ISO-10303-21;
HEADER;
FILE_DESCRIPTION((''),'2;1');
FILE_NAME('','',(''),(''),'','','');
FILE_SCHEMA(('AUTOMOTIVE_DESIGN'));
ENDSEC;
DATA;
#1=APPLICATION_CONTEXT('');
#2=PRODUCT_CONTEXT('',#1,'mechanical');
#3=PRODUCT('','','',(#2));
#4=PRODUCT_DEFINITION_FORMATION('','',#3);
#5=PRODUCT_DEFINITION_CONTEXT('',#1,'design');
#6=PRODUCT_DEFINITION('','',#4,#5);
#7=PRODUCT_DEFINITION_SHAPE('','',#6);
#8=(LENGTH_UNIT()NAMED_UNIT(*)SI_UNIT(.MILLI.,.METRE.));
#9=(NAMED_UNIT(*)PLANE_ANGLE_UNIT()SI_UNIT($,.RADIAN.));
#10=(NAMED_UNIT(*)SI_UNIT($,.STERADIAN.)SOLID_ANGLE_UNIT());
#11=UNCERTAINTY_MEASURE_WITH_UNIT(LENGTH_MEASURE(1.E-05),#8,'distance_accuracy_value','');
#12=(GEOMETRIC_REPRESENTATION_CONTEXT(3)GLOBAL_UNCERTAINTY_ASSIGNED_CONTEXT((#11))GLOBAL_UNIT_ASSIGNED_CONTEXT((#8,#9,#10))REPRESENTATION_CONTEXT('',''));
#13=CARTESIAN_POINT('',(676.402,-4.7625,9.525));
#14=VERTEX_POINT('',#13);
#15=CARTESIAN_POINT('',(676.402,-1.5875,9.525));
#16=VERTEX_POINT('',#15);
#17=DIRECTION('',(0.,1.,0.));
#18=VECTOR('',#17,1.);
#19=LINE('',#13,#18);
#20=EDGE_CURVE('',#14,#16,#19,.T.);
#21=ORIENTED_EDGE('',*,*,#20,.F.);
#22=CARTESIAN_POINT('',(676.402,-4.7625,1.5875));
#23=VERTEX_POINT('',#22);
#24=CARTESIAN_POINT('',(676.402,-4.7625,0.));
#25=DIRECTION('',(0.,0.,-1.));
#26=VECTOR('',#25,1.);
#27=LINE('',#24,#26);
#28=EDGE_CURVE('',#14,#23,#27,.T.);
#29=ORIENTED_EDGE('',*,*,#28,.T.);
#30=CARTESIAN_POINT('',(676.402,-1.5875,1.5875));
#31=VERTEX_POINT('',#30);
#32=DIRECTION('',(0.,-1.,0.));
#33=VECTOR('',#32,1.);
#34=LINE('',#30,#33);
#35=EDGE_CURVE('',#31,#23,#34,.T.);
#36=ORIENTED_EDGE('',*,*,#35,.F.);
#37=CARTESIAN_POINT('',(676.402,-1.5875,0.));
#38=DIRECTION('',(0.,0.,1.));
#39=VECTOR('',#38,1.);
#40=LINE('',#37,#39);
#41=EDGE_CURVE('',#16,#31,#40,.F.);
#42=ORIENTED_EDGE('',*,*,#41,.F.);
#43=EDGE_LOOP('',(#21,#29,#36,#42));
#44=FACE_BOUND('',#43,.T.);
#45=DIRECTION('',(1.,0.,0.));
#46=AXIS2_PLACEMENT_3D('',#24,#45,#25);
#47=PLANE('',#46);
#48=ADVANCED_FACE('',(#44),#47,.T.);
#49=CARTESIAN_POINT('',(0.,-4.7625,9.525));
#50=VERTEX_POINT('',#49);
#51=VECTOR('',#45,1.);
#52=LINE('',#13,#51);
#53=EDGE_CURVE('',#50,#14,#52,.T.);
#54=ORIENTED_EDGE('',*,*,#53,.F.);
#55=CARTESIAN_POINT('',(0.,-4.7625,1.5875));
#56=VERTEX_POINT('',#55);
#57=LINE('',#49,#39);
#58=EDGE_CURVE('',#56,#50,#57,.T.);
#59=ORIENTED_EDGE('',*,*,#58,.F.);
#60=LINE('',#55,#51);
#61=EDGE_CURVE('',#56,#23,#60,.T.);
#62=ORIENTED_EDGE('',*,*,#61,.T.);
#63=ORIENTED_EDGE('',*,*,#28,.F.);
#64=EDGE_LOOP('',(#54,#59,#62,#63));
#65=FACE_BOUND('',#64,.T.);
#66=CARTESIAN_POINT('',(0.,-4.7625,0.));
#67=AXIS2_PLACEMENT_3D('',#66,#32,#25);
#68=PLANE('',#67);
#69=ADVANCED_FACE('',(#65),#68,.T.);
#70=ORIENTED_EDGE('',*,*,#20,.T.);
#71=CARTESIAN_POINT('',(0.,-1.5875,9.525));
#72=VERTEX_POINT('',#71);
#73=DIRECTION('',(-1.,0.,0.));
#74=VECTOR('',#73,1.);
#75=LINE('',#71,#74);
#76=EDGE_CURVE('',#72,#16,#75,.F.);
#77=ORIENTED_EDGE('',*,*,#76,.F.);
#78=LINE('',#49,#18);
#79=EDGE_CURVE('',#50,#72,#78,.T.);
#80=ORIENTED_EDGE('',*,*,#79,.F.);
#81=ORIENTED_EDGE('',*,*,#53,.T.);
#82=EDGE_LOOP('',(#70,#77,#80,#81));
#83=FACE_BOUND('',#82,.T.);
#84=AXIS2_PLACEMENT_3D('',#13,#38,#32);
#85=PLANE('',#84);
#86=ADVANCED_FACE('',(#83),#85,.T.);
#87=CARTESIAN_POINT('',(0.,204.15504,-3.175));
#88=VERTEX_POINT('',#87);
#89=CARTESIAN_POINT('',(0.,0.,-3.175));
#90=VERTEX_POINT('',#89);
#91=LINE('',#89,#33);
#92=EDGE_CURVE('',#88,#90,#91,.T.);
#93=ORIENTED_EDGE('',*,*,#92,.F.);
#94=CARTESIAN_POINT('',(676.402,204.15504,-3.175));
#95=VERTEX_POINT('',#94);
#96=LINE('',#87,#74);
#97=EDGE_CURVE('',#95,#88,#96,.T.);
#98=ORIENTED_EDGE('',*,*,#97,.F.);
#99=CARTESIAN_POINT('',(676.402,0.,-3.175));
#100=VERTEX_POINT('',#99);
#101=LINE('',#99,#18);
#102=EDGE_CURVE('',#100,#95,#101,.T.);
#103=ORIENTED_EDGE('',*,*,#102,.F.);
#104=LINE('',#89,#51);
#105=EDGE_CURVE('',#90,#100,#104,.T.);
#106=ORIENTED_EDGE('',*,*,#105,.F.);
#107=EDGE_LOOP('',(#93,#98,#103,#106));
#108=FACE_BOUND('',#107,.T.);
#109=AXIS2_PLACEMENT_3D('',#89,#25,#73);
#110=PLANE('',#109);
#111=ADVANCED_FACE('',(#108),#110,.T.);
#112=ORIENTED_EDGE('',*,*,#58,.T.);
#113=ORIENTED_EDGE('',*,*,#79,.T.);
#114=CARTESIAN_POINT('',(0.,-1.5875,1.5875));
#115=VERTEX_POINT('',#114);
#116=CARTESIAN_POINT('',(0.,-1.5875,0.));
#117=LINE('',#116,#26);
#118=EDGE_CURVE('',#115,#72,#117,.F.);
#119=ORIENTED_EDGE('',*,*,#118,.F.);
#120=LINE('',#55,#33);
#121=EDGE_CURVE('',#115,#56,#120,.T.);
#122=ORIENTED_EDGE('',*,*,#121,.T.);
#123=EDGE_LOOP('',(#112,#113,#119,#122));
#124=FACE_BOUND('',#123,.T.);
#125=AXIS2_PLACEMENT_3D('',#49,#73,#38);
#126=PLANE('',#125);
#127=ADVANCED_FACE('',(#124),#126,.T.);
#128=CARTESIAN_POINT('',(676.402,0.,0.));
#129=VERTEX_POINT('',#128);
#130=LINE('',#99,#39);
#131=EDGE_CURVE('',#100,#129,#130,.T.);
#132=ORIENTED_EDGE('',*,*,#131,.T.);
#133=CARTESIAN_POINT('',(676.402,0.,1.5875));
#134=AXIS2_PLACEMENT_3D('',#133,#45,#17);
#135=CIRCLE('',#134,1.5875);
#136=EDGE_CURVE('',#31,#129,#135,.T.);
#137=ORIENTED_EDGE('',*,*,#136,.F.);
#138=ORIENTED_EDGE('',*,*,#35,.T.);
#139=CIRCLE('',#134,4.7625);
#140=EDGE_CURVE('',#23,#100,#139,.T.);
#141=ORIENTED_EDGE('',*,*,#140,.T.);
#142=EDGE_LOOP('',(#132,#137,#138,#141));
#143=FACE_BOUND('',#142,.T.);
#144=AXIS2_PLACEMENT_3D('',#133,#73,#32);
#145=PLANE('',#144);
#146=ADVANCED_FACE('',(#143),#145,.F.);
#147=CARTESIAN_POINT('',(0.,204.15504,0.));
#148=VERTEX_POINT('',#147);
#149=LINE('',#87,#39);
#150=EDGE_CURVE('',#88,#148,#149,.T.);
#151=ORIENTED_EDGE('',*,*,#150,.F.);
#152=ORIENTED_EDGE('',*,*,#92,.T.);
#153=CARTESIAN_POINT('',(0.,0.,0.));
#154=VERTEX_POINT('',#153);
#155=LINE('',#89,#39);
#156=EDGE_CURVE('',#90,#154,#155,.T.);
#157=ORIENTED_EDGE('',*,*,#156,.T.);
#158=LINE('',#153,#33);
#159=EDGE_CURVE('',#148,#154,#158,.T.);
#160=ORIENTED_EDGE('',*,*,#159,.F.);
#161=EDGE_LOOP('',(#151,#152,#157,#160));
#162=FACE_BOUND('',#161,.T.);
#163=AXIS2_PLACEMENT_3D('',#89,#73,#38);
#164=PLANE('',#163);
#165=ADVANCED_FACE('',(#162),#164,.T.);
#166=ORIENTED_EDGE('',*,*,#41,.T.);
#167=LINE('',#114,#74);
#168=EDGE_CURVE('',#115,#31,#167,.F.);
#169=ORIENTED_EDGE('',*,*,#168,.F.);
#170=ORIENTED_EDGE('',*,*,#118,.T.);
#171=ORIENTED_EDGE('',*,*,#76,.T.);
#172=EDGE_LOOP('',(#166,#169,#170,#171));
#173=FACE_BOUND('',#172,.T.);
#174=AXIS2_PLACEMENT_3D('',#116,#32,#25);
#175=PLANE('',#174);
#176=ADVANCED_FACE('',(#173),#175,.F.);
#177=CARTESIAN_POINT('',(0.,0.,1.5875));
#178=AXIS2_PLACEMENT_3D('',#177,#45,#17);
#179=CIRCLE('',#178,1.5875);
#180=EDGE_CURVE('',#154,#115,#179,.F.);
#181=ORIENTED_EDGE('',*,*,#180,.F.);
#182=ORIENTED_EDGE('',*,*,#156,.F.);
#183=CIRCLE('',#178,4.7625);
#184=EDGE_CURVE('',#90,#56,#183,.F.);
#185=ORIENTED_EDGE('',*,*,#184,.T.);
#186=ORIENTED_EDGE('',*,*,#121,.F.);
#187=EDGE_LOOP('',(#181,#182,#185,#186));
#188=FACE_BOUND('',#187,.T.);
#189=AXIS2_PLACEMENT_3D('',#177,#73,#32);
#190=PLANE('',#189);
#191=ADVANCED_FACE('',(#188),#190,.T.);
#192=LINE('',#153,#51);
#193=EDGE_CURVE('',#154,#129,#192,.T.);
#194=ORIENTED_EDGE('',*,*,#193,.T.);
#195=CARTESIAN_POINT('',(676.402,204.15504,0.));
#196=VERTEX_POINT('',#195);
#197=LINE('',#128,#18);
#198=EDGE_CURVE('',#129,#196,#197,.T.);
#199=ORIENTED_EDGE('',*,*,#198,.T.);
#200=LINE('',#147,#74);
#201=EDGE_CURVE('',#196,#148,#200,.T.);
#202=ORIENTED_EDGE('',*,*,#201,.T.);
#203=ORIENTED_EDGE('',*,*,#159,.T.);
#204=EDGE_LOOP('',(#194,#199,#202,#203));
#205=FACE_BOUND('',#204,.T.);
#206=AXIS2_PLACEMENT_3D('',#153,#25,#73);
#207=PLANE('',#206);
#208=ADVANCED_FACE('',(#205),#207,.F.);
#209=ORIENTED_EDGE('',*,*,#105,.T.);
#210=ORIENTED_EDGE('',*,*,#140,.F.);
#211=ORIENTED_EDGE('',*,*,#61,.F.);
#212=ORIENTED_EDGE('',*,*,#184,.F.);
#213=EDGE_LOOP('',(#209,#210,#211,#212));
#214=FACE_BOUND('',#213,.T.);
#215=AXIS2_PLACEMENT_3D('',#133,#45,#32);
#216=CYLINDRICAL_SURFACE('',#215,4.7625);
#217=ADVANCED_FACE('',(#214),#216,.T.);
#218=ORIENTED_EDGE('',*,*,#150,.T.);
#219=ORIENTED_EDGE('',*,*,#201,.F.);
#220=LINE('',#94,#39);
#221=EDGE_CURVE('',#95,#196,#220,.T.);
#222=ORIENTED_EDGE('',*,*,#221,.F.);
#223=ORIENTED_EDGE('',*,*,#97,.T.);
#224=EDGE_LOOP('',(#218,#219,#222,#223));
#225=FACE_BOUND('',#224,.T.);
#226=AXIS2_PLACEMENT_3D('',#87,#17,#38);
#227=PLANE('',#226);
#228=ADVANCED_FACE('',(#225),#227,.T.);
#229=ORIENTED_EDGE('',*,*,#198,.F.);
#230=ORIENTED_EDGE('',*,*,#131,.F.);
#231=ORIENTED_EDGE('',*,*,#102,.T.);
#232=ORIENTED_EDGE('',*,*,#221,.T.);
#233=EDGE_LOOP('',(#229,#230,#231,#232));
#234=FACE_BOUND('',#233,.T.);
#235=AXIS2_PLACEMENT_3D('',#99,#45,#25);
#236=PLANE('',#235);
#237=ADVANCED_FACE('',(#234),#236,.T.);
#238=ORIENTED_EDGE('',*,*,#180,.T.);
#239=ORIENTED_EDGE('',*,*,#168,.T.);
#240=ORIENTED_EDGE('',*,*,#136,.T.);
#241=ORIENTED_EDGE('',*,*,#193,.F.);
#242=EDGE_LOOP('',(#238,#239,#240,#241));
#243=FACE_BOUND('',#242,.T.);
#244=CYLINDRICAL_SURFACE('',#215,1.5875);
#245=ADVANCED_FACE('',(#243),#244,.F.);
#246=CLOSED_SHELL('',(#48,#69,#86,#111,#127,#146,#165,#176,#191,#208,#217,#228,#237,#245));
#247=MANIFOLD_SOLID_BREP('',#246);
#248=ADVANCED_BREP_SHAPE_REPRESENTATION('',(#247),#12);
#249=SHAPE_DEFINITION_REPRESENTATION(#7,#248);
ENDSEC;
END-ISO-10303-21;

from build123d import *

# Parameters (mm, degrees)
SKETCH1_W          = 676.402
SKETCH1_H          = 204.15504
BASE_FLANGE1_DEPTH = 3.175
EDGE_FLANGE1_DEPTH = 676.402
SKETCH9_R          = 9.525
CUT_EXTRUDE1_DEPTH = 3.175


# Sheet-metal steps are written as plain solids
with BuildPart() as part:
    # Sketch1 → Base-Flange1 (new body)
    with BuildSketch(Plane.XY):
        with Locations((338.201, 102.07752)):
            Rectangle(SKETCH1_W, SKETCH1_H)
    extrude(amount=-BASE_FLANGE1_DEPTH)

    # Edge-Flange1 section (across the edge) → Edge-Flange1 (add)
    with BuildSketch(Plane(origin=(0, -1.5875, 0), x_dir=(0, 1, 0), z_dir=(1, 0, 0))):
        with BuildLine():
            Line((-3.175, 1.5875), (-3.175, 9.525))
            Line((-3.175, 9.525), (0, 9.525))
            Line((0, 9.525), (0, 1.5875))
            ThreePointArc((0, 1.5875), (0.464967985, 0.464967985), (1.5875, 0))
            Line((1.5875, 0), (1.5875, -3.175))
            ThreePointArc((1.5875, -3.175), (-1.780096045, -1.780096045), (-3.175, 1.5875))
        make_face()
    extrude(amount=EDGE_FLANGE1_DEPTH)

    # Sketch9 → Cut-Extrude1 (cut)
    with BuildSketch(Plane(origin=(0, 0, 1.251039998), x_dir=(-1, 0, 0), z_dir=(0, 0, -1))):
        with Locations((-267.508853456, 43.732259818)):
            Circle(SKETCH9_R)
        with Locations((-180.176306543, 43.732259818)):
            Circle(SKETCH9_R)
        with Locations((-38.908853456, 43.732259818)):
            Circle(SKETCH9_R)
        with Locations((-637.376306543, 43.732259818)):
            Circle(SKETCH9_R)
        with Locations((-496.108853456, 43.732259818)):
            Circle(SKETCH9_R)
        with Locations((-408.776306543, 43.732259818)):
            Circle(SKETCH9_R)
        with Locations((-38.908853456, 163.597780182)):
            Circle(SKETCH9_R)
        with Locations((-180.176306543, 163.597780182)):
            Circle(SKETCH9_R)
        with Locations((-408.776306543, 163.597780182)):
            Circle(SKETCH9_R)
        with Locations((-267.508853456, 163.597780182)):
            Circle(SKETCH9_R)
        with Locations((-637.376306543, 163.597780182)):
            Circle(SKETCH9_R)
        with Locations((-496.108853456, 163.597780182)):
            Circle(SKETCH9_R)
    extrude(amount=-CUT_EXTRUDE1_DEPTH, mode=Mode.SUBTRACT)


solid = part.part
